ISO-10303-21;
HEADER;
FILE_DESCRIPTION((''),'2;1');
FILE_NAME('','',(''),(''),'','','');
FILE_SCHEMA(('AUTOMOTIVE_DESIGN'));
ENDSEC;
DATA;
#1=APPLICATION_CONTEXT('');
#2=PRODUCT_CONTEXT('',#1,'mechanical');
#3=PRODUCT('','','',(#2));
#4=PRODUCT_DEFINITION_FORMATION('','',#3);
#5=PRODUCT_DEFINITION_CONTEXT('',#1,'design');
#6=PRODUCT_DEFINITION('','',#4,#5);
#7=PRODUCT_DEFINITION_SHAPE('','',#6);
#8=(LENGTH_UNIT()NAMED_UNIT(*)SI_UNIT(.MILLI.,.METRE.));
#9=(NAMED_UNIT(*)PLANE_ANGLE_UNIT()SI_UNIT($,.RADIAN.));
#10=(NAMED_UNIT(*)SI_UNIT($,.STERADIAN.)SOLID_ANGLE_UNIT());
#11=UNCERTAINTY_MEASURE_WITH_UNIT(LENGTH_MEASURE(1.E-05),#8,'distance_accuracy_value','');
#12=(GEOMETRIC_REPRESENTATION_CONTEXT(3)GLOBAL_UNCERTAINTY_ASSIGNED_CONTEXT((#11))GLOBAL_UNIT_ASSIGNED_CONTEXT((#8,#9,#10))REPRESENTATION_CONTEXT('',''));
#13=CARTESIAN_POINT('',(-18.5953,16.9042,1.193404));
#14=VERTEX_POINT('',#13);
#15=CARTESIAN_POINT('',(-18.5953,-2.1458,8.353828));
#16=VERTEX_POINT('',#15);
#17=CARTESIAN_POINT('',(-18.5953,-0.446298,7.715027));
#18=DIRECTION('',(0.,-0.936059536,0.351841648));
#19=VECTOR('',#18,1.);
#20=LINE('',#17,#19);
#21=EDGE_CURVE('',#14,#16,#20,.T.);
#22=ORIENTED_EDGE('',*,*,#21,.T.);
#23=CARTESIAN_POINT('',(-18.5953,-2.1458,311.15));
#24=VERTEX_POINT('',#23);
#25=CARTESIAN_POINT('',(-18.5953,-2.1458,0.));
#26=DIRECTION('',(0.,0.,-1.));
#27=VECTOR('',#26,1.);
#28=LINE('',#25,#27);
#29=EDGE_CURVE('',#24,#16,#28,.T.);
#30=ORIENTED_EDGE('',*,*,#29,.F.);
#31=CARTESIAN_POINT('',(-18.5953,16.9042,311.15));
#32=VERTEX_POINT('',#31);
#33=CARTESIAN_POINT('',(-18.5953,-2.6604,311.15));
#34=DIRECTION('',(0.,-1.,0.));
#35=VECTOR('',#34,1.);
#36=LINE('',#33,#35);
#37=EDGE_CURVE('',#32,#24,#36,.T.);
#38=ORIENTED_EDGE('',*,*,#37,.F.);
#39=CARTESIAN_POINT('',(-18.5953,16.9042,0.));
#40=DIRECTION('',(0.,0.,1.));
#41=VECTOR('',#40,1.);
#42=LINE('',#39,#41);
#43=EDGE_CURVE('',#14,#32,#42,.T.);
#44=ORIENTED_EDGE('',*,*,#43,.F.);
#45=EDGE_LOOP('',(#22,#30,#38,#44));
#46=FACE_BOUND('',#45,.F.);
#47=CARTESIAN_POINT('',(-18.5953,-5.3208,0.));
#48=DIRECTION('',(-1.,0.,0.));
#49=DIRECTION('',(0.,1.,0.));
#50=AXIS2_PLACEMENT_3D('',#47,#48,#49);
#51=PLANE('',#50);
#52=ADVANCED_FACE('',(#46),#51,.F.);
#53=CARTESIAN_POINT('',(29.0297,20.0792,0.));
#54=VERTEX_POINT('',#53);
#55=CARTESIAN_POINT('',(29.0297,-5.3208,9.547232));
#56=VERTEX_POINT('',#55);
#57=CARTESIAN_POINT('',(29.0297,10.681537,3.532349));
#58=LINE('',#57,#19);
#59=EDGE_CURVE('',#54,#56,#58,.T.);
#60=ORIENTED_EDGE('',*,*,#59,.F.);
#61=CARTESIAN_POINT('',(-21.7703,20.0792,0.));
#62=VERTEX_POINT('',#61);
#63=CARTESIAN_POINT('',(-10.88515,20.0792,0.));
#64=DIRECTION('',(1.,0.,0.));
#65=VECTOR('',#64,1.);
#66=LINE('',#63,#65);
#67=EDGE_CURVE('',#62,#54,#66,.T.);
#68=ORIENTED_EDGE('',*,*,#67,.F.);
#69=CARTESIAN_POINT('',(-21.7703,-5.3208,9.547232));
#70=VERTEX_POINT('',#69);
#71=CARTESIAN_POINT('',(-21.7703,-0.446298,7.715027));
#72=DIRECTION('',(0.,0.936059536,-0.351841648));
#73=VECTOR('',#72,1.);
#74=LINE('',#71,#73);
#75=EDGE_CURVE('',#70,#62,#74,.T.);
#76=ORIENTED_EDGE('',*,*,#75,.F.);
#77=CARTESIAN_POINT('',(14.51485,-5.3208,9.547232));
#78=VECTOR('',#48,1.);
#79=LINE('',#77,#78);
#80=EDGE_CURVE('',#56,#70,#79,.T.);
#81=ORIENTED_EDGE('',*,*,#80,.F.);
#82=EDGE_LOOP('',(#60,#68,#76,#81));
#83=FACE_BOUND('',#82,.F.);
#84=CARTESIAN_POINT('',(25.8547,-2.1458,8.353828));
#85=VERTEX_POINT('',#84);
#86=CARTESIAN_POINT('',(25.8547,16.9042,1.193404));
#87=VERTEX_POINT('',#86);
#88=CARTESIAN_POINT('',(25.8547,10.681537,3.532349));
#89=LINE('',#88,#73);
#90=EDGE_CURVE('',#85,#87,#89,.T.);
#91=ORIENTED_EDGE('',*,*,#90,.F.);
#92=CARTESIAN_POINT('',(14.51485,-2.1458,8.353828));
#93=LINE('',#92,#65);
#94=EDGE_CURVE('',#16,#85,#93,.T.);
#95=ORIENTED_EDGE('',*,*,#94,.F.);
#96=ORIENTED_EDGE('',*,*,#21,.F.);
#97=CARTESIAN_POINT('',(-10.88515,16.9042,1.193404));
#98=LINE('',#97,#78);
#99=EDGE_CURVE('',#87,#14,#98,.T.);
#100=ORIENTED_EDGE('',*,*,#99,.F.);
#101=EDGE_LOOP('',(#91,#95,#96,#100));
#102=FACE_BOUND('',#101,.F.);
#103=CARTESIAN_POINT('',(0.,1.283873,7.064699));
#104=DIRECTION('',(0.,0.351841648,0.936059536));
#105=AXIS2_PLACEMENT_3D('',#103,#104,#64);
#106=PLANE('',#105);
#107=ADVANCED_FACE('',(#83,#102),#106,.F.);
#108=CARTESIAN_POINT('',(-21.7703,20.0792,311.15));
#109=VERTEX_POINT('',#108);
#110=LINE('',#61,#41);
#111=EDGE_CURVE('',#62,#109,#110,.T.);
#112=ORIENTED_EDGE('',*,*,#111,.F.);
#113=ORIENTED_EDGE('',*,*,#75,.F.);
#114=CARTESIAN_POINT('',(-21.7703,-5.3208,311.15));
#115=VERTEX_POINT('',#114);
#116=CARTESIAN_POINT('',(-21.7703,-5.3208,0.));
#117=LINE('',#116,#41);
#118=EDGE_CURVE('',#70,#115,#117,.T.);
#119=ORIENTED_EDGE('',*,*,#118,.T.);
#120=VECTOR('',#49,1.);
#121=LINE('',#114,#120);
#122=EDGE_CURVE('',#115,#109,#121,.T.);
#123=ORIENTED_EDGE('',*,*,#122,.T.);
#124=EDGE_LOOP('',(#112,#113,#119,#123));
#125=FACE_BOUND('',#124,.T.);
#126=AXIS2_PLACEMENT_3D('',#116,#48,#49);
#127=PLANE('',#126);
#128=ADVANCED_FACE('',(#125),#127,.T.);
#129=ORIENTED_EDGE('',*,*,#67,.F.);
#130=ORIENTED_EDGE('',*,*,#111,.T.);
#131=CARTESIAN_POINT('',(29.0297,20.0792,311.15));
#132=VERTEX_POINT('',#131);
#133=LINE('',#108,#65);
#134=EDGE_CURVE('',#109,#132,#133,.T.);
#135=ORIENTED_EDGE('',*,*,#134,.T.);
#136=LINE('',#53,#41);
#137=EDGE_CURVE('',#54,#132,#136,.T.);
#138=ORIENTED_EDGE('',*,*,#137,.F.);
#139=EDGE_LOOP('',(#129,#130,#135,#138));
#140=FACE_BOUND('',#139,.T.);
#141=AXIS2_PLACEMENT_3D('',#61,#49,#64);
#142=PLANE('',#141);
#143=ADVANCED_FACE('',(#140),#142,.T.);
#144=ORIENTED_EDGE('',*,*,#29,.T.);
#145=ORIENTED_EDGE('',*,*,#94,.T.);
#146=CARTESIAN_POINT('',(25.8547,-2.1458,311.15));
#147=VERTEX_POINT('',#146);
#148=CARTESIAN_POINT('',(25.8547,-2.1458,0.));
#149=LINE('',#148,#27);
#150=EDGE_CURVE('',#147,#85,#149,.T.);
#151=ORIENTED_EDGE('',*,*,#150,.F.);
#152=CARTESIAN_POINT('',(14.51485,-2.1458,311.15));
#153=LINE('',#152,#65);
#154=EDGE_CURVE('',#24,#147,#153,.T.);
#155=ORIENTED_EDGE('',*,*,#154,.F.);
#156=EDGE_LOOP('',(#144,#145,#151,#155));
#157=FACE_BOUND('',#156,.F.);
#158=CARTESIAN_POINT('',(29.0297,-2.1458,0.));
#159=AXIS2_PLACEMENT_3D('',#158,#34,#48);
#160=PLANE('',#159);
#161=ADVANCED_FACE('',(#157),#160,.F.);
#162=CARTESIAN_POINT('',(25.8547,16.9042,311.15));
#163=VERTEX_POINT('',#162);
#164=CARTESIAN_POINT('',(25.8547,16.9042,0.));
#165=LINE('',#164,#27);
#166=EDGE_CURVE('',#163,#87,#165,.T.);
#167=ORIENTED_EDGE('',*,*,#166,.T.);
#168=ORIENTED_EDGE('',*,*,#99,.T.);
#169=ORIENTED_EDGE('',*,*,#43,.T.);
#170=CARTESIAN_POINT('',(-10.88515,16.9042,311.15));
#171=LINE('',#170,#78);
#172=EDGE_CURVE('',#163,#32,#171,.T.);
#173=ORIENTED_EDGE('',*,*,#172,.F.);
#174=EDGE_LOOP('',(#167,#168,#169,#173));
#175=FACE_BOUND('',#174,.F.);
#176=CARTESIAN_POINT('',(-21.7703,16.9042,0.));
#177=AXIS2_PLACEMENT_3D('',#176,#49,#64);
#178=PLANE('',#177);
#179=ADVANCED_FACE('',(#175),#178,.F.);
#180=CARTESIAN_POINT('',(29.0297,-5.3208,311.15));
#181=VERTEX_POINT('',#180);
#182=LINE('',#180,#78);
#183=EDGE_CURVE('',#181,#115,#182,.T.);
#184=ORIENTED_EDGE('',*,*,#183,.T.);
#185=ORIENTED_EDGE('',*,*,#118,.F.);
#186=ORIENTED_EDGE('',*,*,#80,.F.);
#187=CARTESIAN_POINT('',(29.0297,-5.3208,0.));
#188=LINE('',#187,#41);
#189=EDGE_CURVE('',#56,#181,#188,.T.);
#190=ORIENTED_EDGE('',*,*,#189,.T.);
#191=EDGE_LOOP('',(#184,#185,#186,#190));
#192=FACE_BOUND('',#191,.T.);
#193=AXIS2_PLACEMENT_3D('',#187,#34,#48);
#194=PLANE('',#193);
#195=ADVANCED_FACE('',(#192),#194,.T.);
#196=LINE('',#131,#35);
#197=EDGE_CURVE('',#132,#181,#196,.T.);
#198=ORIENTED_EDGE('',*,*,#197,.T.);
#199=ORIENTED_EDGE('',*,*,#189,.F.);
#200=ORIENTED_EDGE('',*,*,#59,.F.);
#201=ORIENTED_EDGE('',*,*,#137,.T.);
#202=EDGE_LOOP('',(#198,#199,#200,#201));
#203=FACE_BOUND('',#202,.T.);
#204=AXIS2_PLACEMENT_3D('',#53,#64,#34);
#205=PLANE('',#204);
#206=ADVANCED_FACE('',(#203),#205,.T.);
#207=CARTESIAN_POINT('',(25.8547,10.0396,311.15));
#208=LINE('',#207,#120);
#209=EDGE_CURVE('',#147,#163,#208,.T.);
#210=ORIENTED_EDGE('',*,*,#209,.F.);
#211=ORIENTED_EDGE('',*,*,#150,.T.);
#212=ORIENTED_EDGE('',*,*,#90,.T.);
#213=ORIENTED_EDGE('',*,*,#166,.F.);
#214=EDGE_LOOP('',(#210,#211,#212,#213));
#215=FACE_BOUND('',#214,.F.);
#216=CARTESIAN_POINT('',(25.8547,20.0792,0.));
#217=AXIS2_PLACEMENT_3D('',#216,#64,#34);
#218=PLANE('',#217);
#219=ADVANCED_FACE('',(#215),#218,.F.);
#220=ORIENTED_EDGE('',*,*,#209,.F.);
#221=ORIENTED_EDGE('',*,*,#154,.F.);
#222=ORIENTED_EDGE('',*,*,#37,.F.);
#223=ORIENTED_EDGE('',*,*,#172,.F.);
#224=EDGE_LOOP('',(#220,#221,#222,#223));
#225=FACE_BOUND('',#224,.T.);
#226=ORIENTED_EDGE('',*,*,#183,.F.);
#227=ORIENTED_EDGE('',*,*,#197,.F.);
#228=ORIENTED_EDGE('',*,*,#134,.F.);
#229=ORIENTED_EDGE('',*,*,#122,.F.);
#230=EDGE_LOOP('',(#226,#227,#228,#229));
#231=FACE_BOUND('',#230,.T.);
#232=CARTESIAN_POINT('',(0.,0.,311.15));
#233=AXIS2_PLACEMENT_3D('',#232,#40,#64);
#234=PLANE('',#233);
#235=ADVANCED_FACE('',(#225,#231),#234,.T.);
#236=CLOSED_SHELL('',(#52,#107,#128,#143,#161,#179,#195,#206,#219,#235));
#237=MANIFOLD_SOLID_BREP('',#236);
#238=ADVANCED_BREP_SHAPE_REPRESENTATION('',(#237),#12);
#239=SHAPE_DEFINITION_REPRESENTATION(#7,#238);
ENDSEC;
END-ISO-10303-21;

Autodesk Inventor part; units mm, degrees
ref_plane "YZ Plane" through (0, 0, 0) normal (1, 0, 0) x (0, 1, 0)
ref_plane "XZ Plane" through (0, 0, 0) normal (0, 1, 0) x (-1, 0, 0)
ref_plane "XY Plane" through (0, 0, 0) normal (0, 0, 1) x (1, 0, 0)
sketch "Sketch1" plane through (0, 0, 0) normal (0, 0, 1) x (1, 0, 0)
  line L0 (-21.7703, 20.0792) -> (29.0297, 20.0792)
  line L1 (29.0297, 20.0792) -> (29.0297, -5.3208)
  line L2 (29.0297, -5.3208) -> (-21.7703, -5.3208)
  line L3 (-21.7703, -5.3208) -> (-21.7703, 20.0792)
  dimension "d0" = 25.4
  dimension "d1" = 50.8
extrude "Extrusion1" add sketch "Sketch1" along normal blind 311.15
shell "Shell1" thickness 3.175 removed faces 2 at (-4.8369, 11.6125, 311.15) at (-4.8369, 11.6125, 0)
draft "FaceDraft1" angle 20.6 pull direction (0, -1, 0) faces at (-3.7786, 19.0209, 0) fixed edges at (3.6297, 20.0792, 0)
properties part number "FE-00013-04"
